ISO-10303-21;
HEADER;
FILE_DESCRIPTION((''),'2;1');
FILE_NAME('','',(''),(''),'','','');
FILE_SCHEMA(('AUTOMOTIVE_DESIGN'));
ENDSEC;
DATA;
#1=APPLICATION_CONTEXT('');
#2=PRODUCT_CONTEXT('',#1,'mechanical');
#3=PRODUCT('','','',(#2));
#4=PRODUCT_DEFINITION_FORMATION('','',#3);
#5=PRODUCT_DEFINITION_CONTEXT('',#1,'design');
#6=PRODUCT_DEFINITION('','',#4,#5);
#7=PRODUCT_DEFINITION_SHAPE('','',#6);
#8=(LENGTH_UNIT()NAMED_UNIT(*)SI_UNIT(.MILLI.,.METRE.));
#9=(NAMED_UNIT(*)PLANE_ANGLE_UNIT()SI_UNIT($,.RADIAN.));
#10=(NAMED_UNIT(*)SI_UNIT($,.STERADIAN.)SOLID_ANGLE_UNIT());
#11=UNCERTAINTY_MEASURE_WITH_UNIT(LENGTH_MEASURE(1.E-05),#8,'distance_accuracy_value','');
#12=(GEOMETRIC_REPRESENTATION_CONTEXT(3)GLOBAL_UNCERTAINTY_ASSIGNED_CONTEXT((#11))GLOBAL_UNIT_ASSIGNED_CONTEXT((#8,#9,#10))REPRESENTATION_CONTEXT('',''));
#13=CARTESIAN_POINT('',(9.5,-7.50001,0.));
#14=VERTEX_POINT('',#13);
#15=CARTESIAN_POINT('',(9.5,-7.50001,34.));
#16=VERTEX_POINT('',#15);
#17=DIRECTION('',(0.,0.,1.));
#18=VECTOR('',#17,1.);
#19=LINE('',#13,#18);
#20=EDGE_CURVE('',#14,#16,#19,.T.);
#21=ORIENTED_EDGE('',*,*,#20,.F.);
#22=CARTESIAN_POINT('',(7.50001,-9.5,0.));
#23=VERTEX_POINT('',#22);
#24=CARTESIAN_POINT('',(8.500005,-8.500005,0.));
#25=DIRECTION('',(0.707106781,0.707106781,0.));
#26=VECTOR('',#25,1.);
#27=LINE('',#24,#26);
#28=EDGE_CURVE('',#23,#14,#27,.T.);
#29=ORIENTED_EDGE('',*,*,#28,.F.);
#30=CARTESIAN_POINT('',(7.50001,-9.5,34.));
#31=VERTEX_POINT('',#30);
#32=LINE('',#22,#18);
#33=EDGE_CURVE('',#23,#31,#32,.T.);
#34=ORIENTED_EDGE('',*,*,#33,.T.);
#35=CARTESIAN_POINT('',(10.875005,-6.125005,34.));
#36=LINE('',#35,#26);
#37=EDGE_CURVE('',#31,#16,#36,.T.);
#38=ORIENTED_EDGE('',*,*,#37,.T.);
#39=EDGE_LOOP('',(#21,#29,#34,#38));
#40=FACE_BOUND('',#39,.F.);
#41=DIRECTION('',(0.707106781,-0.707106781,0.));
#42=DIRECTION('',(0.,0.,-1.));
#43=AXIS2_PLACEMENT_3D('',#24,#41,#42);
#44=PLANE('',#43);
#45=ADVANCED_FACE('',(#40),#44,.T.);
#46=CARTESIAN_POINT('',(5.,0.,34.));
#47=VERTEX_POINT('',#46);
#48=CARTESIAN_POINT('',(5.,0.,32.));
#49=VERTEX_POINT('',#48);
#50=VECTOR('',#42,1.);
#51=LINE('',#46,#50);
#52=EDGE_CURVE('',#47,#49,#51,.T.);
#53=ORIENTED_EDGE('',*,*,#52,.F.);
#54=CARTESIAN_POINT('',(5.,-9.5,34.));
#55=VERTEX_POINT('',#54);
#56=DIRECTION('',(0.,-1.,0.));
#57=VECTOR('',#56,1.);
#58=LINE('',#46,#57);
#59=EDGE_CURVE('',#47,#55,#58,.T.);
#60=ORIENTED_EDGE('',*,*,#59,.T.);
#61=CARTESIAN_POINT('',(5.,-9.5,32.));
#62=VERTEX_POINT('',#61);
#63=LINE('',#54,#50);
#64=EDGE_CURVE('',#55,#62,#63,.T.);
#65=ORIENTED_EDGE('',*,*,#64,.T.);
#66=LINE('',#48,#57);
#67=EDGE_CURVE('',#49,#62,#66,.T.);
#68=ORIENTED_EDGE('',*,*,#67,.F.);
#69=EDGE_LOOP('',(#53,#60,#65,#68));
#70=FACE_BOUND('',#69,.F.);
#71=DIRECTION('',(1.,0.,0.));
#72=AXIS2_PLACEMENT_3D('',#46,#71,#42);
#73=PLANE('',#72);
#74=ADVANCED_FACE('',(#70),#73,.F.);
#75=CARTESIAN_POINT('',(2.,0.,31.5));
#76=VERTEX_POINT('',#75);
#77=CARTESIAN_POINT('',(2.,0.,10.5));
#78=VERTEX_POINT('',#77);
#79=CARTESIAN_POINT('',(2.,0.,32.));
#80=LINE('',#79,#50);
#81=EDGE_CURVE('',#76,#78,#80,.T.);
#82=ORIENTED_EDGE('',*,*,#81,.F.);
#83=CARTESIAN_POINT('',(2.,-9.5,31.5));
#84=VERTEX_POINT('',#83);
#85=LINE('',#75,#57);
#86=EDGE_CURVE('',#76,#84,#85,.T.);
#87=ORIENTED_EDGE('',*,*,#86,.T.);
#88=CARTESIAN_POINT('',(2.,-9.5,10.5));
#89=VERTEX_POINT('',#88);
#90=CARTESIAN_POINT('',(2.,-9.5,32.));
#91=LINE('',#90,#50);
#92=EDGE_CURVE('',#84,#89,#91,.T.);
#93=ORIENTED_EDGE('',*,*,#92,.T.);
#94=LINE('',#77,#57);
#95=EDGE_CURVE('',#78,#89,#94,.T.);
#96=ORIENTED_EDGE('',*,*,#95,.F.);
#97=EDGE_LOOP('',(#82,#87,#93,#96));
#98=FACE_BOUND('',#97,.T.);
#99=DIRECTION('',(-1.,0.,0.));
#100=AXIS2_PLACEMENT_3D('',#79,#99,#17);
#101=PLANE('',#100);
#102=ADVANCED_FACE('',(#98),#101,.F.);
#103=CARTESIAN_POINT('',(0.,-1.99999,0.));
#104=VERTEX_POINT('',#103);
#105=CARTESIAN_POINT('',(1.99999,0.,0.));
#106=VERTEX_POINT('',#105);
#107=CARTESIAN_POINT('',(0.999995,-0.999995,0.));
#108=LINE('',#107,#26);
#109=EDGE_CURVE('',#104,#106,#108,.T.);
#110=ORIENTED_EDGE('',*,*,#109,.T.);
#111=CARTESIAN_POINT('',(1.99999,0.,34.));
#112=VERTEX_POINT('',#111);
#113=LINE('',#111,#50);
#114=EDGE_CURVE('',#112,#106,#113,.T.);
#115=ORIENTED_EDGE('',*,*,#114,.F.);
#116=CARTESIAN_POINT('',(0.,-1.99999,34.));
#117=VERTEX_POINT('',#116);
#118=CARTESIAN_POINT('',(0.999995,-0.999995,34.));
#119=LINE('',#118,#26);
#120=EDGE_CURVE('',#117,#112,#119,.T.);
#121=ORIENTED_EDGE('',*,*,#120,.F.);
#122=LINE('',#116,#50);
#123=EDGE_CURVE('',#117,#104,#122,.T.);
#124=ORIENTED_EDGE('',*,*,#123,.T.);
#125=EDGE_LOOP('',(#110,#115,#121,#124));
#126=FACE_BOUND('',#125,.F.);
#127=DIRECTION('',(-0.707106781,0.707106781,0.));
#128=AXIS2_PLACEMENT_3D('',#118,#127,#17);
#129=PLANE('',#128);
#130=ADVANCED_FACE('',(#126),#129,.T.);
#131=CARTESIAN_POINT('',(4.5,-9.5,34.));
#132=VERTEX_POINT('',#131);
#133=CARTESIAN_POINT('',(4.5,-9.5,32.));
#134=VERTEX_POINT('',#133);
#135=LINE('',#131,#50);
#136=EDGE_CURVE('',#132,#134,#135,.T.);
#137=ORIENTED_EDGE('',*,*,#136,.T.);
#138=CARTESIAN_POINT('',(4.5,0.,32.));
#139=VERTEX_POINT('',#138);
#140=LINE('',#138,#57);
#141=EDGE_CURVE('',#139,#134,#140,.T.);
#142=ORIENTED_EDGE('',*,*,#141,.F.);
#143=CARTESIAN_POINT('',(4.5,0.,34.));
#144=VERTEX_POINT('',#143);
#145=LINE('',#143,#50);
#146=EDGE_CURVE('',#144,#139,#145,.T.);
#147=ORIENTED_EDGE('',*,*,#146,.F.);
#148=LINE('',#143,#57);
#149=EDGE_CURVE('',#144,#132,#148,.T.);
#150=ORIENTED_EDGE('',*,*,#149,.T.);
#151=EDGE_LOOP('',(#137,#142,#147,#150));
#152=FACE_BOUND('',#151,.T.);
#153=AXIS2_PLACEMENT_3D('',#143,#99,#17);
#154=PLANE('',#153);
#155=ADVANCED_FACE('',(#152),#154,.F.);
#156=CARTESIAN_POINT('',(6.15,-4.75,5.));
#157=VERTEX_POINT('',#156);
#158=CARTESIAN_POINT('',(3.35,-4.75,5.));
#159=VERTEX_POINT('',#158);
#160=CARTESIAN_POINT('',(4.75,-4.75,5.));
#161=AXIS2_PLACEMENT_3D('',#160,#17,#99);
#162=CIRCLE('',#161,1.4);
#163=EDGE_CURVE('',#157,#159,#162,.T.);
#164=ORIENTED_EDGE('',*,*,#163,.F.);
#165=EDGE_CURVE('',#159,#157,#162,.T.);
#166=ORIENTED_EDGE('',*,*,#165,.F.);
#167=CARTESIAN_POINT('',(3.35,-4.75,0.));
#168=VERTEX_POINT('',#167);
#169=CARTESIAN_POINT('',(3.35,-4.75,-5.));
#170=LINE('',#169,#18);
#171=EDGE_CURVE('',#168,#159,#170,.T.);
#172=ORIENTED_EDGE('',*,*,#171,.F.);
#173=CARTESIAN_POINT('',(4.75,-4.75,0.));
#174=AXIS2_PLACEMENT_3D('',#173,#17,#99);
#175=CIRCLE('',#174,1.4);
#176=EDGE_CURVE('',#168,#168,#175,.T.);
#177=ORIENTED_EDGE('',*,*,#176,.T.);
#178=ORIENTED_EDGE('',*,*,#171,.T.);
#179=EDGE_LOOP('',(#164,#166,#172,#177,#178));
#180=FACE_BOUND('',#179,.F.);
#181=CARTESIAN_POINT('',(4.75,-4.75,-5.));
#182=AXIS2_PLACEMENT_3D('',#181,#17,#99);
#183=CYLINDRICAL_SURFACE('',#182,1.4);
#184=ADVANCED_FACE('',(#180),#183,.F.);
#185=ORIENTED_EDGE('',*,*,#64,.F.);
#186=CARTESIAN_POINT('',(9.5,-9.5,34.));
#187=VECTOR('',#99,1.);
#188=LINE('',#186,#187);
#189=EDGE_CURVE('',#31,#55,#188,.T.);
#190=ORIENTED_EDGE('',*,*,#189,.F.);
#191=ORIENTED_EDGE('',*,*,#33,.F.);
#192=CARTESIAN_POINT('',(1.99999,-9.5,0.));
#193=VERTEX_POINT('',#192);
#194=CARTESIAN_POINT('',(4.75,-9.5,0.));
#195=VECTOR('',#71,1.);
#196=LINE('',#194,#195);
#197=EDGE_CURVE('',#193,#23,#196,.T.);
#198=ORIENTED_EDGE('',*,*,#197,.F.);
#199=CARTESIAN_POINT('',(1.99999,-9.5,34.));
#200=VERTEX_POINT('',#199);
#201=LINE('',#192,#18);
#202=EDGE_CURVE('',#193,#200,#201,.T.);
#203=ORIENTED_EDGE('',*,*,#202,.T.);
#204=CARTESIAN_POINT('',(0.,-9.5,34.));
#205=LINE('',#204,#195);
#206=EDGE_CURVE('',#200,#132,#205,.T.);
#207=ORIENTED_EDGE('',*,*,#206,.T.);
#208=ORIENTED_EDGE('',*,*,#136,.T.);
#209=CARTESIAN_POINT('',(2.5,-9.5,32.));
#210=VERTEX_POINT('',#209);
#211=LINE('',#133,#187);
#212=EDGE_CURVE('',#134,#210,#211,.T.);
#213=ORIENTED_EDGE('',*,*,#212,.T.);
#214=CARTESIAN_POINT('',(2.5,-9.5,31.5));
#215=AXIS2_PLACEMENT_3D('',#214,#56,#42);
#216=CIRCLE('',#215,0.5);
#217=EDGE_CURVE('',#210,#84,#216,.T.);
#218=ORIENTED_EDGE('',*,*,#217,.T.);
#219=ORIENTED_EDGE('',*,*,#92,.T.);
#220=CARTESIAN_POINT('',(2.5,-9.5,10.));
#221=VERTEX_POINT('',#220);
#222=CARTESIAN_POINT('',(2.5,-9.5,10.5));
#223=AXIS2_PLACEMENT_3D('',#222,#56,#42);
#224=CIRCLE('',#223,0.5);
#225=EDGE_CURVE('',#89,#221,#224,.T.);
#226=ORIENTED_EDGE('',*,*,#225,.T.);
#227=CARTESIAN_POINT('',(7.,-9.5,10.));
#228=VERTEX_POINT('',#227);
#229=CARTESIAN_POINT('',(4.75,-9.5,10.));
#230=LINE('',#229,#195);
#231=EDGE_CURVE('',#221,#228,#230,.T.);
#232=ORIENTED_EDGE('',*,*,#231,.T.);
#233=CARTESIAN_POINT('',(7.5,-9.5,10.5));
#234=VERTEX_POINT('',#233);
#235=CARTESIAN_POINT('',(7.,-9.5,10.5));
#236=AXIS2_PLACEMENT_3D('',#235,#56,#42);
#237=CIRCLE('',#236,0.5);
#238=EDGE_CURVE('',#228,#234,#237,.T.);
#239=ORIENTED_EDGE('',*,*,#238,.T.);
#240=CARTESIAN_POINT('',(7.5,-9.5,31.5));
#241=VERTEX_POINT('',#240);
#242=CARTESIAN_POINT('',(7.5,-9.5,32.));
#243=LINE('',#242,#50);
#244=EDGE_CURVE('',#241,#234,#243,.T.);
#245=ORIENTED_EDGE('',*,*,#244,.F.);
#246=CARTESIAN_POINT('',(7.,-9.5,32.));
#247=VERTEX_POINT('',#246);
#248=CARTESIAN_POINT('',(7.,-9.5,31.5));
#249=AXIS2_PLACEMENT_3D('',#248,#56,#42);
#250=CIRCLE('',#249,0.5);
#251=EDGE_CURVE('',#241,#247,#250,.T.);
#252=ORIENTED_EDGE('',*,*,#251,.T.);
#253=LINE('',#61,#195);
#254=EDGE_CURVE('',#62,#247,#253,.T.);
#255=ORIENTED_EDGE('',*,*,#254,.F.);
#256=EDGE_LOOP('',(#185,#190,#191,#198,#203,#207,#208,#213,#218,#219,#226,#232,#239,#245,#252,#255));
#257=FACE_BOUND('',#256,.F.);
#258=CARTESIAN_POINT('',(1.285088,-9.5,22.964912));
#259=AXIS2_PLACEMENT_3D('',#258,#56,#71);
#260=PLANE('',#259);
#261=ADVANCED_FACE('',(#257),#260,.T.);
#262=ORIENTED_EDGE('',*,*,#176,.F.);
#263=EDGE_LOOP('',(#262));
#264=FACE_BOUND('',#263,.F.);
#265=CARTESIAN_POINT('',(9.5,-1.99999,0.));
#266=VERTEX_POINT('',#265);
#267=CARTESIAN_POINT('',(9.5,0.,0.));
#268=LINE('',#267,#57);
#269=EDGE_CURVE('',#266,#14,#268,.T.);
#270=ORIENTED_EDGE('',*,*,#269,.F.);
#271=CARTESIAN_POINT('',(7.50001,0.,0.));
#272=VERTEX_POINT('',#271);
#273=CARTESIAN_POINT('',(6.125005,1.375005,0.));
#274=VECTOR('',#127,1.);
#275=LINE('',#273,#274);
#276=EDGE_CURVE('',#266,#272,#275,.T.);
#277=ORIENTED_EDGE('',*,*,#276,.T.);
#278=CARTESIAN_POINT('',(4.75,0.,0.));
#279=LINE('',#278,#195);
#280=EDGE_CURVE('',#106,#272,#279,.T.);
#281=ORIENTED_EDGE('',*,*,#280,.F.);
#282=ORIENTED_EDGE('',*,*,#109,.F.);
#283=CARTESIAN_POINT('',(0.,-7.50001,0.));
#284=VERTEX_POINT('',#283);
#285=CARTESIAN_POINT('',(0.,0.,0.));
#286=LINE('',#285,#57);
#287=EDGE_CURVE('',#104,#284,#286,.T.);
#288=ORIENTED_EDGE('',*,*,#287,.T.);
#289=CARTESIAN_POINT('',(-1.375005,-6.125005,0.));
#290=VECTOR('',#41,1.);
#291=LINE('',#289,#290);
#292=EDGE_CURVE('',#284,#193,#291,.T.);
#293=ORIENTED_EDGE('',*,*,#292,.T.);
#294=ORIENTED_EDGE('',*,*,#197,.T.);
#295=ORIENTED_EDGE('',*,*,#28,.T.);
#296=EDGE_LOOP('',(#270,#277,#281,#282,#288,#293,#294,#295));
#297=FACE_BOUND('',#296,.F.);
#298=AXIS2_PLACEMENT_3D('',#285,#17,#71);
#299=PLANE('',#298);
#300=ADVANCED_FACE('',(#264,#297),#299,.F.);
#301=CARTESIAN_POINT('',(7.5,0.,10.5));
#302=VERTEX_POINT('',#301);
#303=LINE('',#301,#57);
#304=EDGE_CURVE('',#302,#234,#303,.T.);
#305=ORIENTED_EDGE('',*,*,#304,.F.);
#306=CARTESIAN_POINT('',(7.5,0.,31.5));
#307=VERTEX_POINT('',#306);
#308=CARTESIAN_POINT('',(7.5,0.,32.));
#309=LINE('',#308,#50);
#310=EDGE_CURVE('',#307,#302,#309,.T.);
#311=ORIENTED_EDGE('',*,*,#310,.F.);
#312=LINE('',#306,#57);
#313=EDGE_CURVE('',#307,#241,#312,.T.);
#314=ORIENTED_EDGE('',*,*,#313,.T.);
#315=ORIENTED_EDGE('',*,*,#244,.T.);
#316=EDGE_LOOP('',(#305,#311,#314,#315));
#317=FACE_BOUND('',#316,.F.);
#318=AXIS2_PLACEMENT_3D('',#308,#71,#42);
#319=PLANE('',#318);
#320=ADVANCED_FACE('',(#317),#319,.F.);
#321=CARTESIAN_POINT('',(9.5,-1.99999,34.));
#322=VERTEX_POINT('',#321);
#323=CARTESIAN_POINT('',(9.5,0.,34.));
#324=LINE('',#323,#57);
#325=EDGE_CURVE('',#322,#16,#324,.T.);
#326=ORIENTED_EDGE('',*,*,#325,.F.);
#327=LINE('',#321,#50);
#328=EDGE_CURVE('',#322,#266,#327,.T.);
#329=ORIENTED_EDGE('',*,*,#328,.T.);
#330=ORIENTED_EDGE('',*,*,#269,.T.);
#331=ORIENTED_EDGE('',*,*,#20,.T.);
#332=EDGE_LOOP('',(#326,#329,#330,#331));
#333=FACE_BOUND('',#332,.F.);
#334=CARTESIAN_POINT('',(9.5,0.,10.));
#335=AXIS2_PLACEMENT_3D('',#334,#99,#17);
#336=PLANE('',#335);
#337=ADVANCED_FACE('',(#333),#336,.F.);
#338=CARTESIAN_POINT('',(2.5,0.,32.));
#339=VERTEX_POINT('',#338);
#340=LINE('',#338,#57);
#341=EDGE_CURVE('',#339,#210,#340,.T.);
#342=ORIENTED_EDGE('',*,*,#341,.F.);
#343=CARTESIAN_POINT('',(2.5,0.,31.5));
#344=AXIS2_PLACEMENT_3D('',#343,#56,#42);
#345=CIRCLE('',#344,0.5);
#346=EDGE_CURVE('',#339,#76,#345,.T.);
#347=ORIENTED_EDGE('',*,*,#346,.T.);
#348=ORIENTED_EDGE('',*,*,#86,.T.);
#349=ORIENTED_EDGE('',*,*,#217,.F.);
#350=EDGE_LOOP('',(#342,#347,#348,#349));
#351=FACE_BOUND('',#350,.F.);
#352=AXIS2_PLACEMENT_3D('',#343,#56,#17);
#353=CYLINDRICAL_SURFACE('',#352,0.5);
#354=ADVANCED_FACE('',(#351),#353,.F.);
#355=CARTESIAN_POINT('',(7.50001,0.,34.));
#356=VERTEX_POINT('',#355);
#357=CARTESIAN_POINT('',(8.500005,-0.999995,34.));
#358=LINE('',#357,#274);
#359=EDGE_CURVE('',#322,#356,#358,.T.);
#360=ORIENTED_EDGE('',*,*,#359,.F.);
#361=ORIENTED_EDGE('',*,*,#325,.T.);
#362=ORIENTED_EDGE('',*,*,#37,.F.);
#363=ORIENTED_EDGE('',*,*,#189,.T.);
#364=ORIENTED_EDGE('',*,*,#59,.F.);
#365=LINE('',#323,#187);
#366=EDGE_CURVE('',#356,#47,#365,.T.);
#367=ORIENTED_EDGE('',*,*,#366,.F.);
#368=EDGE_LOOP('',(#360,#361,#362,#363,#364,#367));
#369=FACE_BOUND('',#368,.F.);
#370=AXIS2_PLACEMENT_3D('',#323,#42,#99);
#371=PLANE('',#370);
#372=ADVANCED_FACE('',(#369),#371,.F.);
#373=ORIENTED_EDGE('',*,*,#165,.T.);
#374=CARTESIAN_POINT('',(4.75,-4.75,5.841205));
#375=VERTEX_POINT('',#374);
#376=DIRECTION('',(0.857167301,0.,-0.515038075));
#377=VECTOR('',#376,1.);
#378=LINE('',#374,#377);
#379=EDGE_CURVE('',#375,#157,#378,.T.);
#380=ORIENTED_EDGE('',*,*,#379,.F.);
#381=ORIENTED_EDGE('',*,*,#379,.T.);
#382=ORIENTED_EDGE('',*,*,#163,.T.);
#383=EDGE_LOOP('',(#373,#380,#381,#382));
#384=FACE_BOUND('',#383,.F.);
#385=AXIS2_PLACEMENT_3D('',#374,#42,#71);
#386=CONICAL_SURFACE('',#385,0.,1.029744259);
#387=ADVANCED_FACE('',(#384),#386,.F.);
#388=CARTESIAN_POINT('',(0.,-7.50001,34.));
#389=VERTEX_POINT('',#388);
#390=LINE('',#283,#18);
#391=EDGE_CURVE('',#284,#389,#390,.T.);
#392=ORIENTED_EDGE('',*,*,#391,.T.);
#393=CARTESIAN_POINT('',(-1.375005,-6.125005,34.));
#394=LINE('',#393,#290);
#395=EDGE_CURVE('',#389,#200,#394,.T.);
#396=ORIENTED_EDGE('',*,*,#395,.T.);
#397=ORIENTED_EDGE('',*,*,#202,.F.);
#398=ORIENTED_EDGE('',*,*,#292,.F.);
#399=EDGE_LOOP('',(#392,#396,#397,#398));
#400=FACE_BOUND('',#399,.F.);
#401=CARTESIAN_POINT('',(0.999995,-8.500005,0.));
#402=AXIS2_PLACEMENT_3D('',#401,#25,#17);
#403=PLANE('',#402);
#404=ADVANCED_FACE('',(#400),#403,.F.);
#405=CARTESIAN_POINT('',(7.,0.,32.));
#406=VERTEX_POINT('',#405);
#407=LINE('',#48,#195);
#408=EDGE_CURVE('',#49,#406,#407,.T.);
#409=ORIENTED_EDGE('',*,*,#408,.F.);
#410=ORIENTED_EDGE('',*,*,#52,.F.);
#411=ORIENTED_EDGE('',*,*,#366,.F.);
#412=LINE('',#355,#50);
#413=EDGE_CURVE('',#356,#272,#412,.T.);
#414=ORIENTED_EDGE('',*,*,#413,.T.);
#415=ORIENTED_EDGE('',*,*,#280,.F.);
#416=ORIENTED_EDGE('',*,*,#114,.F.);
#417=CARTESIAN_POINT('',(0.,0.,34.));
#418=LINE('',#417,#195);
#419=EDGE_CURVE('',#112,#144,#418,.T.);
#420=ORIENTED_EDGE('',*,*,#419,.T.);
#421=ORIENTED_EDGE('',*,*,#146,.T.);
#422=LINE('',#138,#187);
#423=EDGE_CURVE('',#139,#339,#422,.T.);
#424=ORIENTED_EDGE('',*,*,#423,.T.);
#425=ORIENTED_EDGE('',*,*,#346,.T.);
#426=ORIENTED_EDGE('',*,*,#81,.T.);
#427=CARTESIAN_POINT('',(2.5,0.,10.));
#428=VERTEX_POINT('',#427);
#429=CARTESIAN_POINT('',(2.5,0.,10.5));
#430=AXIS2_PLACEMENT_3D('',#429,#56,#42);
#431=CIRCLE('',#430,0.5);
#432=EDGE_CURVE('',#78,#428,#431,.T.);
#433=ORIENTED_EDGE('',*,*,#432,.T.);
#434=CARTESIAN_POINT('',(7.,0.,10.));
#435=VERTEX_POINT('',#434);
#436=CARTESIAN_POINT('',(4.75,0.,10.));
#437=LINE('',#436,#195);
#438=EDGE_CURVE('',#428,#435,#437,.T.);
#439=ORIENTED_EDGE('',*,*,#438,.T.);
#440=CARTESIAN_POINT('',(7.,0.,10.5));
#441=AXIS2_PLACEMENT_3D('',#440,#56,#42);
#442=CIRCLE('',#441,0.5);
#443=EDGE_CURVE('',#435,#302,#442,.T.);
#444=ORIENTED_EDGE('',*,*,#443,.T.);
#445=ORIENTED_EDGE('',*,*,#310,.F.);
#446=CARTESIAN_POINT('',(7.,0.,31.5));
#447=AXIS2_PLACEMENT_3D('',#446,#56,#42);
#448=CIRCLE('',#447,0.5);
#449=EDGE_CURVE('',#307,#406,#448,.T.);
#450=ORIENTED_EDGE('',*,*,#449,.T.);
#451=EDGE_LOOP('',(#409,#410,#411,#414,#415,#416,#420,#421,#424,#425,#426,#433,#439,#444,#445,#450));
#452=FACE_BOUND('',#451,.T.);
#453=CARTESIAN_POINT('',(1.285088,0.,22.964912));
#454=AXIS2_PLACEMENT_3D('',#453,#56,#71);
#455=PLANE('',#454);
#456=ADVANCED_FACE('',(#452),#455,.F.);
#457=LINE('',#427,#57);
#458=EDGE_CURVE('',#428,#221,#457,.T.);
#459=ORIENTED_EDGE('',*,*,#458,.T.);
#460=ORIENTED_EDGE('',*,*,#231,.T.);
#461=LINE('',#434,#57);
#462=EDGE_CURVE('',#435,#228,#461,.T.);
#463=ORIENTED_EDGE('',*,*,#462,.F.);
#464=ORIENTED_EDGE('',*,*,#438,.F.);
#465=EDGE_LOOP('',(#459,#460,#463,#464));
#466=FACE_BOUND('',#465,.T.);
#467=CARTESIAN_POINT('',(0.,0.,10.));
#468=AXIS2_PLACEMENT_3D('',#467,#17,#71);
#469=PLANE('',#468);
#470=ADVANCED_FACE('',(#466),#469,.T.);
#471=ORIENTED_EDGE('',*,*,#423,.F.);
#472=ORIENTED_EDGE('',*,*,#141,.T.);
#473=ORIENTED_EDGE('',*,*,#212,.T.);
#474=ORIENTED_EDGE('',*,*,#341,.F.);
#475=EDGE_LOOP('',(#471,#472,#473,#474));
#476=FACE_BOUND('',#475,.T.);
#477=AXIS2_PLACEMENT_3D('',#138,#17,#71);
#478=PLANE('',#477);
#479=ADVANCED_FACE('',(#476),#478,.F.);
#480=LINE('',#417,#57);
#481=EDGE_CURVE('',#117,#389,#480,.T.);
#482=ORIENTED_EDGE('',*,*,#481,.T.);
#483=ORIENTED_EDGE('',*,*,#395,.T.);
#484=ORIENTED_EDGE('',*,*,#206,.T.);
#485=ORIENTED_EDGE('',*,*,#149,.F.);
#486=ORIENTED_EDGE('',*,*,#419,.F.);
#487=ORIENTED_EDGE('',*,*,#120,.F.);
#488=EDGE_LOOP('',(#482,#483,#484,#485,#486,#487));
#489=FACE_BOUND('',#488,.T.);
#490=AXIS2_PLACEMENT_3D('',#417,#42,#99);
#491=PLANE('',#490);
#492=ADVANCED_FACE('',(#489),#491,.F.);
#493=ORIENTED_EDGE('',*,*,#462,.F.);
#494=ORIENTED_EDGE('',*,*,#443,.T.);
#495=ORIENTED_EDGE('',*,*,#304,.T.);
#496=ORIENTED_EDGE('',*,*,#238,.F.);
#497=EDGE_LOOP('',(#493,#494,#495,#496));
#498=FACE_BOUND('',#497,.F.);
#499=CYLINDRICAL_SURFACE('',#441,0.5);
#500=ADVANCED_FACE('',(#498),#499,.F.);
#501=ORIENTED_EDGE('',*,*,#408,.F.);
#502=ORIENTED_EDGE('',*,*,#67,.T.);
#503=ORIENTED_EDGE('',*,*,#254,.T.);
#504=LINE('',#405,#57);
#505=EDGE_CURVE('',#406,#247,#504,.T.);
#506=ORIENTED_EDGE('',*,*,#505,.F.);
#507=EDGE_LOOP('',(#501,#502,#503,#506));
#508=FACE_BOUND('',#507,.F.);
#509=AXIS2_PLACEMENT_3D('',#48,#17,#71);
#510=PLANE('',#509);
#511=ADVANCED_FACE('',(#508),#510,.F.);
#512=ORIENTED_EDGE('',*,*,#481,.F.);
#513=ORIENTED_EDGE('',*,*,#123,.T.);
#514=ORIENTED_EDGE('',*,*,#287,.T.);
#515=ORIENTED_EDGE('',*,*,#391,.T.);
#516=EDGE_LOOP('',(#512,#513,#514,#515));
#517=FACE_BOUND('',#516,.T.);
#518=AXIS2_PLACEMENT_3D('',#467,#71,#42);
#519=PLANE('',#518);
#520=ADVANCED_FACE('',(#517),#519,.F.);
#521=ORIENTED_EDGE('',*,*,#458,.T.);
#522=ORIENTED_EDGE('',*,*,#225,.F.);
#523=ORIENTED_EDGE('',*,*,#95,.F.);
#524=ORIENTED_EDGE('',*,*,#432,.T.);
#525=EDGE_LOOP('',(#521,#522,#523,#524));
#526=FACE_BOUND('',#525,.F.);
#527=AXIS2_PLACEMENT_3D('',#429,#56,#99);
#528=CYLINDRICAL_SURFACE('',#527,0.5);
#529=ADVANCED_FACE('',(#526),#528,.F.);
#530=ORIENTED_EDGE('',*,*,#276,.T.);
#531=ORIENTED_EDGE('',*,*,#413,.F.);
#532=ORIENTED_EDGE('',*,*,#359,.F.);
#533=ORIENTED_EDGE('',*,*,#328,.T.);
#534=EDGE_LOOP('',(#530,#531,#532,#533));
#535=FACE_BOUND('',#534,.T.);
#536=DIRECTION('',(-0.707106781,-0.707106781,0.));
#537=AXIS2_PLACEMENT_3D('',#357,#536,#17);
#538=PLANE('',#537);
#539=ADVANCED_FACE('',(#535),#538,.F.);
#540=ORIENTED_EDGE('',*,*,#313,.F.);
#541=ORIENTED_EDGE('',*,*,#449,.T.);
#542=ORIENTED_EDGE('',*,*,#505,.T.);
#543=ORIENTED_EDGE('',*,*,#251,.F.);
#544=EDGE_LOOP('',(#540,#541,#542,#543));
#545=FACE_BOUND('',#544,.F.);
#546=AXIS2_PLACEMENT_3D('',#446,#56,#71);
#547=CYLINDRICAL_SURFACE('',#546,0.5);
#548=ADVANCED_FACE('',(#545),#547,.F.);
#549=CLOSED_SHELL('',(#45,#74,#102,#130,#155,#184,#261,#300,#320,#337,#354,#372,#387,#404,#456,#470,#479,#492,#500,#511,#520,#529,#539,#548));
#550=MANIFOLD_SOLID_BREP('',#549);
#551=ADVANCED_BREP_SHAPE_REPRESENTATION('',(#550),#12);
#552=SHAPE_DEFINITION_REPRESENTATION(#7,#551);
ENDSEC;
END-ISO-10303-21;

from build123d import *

# Parameters (mm, degrees)
F0_W      = 9.5
F0_H      = 10
F1_DEPTH  = 9.5
F3_DEPTH  = 9.5
F8_SIZE   = 1.99999
F10_D     = 2.8
F10_DEPTH = 5
F10_TIP   = 0.8412048666
F11_R     = 0.5


# Not quite as in the source:
# - a fillet or chamfer is up to 0.001 mm smaller than in the source, because OpenCascade refuses the exact size


with BuildPart() as f1:
    # F0 (on Front) → F1 (new body)
    with BuildSketch(Plane.XZ):
        with Locations((4.75, 5)):
            Rectangle(F0_W, F0_H)
    extrude(amount=F1_DEPTH)

    # F2 (on Front) → F3 (join)
    with BuildSketch(Plane.XZ):
        Polygon((7.5, 10), (9.5, 10), (9.5, 34), (5, 34), (5, 32), (7.5, 32), align=None)
    extrude(amount=F3_DEPTH)


with BuildPart() as f5_1:
    # F5: instance of F1
    add(f1.part.mirror(Plane(origin=(4.75, -4.75, 5), x_dir=(0, -1, 0), z_dir=(-1, 0, 0))))


with BuildPart() as f1_1:
    add(f1.part)

    # F6: union 

    # F7: union F5_1
    add(f5_1.part)

    # F8 (size 2 in the source; OpenCascade refuses exactly that, so slightly less here)
    f8_edges = [f1_1.edges().sort_by_distance(p)[0] for p in [
        (9.5, -9.5, 17),
        (9.5, 0, 17),
        (0, -9.5, 17),
        (0, 0, 17),
    ]]
    chamfer(f8_edges, length=F8_SIZE)

    # F10
    with Locations(Plane(origin=(0, 0, 0), x_dir=(1, 0, 0), z_dir=(0, 0, -1))):
        with Locations((4.75, 4.75)):
            Hole(F10_D / 2, depth=F10_DEPTH)
            with Locations((0, 0, -(F10_DEPTH + F10_TIP / 2))):  # 118° drill point
                Cone(0, F10_D / 2, F10_TIP, mode=Mode.SUBTRACT)

    # F11
    f11_edges = [f1_1.edges().sort_by_distance(p)[0] for p in [
        (2, -4.75, 10),
        (7.5, -4.75, 10),
        (2, -4.75, 32),
        (7.5, -4.75, 32),
    ]]
    fillet(f11_edges, radius=F11_R)


solid = f1_1.part
